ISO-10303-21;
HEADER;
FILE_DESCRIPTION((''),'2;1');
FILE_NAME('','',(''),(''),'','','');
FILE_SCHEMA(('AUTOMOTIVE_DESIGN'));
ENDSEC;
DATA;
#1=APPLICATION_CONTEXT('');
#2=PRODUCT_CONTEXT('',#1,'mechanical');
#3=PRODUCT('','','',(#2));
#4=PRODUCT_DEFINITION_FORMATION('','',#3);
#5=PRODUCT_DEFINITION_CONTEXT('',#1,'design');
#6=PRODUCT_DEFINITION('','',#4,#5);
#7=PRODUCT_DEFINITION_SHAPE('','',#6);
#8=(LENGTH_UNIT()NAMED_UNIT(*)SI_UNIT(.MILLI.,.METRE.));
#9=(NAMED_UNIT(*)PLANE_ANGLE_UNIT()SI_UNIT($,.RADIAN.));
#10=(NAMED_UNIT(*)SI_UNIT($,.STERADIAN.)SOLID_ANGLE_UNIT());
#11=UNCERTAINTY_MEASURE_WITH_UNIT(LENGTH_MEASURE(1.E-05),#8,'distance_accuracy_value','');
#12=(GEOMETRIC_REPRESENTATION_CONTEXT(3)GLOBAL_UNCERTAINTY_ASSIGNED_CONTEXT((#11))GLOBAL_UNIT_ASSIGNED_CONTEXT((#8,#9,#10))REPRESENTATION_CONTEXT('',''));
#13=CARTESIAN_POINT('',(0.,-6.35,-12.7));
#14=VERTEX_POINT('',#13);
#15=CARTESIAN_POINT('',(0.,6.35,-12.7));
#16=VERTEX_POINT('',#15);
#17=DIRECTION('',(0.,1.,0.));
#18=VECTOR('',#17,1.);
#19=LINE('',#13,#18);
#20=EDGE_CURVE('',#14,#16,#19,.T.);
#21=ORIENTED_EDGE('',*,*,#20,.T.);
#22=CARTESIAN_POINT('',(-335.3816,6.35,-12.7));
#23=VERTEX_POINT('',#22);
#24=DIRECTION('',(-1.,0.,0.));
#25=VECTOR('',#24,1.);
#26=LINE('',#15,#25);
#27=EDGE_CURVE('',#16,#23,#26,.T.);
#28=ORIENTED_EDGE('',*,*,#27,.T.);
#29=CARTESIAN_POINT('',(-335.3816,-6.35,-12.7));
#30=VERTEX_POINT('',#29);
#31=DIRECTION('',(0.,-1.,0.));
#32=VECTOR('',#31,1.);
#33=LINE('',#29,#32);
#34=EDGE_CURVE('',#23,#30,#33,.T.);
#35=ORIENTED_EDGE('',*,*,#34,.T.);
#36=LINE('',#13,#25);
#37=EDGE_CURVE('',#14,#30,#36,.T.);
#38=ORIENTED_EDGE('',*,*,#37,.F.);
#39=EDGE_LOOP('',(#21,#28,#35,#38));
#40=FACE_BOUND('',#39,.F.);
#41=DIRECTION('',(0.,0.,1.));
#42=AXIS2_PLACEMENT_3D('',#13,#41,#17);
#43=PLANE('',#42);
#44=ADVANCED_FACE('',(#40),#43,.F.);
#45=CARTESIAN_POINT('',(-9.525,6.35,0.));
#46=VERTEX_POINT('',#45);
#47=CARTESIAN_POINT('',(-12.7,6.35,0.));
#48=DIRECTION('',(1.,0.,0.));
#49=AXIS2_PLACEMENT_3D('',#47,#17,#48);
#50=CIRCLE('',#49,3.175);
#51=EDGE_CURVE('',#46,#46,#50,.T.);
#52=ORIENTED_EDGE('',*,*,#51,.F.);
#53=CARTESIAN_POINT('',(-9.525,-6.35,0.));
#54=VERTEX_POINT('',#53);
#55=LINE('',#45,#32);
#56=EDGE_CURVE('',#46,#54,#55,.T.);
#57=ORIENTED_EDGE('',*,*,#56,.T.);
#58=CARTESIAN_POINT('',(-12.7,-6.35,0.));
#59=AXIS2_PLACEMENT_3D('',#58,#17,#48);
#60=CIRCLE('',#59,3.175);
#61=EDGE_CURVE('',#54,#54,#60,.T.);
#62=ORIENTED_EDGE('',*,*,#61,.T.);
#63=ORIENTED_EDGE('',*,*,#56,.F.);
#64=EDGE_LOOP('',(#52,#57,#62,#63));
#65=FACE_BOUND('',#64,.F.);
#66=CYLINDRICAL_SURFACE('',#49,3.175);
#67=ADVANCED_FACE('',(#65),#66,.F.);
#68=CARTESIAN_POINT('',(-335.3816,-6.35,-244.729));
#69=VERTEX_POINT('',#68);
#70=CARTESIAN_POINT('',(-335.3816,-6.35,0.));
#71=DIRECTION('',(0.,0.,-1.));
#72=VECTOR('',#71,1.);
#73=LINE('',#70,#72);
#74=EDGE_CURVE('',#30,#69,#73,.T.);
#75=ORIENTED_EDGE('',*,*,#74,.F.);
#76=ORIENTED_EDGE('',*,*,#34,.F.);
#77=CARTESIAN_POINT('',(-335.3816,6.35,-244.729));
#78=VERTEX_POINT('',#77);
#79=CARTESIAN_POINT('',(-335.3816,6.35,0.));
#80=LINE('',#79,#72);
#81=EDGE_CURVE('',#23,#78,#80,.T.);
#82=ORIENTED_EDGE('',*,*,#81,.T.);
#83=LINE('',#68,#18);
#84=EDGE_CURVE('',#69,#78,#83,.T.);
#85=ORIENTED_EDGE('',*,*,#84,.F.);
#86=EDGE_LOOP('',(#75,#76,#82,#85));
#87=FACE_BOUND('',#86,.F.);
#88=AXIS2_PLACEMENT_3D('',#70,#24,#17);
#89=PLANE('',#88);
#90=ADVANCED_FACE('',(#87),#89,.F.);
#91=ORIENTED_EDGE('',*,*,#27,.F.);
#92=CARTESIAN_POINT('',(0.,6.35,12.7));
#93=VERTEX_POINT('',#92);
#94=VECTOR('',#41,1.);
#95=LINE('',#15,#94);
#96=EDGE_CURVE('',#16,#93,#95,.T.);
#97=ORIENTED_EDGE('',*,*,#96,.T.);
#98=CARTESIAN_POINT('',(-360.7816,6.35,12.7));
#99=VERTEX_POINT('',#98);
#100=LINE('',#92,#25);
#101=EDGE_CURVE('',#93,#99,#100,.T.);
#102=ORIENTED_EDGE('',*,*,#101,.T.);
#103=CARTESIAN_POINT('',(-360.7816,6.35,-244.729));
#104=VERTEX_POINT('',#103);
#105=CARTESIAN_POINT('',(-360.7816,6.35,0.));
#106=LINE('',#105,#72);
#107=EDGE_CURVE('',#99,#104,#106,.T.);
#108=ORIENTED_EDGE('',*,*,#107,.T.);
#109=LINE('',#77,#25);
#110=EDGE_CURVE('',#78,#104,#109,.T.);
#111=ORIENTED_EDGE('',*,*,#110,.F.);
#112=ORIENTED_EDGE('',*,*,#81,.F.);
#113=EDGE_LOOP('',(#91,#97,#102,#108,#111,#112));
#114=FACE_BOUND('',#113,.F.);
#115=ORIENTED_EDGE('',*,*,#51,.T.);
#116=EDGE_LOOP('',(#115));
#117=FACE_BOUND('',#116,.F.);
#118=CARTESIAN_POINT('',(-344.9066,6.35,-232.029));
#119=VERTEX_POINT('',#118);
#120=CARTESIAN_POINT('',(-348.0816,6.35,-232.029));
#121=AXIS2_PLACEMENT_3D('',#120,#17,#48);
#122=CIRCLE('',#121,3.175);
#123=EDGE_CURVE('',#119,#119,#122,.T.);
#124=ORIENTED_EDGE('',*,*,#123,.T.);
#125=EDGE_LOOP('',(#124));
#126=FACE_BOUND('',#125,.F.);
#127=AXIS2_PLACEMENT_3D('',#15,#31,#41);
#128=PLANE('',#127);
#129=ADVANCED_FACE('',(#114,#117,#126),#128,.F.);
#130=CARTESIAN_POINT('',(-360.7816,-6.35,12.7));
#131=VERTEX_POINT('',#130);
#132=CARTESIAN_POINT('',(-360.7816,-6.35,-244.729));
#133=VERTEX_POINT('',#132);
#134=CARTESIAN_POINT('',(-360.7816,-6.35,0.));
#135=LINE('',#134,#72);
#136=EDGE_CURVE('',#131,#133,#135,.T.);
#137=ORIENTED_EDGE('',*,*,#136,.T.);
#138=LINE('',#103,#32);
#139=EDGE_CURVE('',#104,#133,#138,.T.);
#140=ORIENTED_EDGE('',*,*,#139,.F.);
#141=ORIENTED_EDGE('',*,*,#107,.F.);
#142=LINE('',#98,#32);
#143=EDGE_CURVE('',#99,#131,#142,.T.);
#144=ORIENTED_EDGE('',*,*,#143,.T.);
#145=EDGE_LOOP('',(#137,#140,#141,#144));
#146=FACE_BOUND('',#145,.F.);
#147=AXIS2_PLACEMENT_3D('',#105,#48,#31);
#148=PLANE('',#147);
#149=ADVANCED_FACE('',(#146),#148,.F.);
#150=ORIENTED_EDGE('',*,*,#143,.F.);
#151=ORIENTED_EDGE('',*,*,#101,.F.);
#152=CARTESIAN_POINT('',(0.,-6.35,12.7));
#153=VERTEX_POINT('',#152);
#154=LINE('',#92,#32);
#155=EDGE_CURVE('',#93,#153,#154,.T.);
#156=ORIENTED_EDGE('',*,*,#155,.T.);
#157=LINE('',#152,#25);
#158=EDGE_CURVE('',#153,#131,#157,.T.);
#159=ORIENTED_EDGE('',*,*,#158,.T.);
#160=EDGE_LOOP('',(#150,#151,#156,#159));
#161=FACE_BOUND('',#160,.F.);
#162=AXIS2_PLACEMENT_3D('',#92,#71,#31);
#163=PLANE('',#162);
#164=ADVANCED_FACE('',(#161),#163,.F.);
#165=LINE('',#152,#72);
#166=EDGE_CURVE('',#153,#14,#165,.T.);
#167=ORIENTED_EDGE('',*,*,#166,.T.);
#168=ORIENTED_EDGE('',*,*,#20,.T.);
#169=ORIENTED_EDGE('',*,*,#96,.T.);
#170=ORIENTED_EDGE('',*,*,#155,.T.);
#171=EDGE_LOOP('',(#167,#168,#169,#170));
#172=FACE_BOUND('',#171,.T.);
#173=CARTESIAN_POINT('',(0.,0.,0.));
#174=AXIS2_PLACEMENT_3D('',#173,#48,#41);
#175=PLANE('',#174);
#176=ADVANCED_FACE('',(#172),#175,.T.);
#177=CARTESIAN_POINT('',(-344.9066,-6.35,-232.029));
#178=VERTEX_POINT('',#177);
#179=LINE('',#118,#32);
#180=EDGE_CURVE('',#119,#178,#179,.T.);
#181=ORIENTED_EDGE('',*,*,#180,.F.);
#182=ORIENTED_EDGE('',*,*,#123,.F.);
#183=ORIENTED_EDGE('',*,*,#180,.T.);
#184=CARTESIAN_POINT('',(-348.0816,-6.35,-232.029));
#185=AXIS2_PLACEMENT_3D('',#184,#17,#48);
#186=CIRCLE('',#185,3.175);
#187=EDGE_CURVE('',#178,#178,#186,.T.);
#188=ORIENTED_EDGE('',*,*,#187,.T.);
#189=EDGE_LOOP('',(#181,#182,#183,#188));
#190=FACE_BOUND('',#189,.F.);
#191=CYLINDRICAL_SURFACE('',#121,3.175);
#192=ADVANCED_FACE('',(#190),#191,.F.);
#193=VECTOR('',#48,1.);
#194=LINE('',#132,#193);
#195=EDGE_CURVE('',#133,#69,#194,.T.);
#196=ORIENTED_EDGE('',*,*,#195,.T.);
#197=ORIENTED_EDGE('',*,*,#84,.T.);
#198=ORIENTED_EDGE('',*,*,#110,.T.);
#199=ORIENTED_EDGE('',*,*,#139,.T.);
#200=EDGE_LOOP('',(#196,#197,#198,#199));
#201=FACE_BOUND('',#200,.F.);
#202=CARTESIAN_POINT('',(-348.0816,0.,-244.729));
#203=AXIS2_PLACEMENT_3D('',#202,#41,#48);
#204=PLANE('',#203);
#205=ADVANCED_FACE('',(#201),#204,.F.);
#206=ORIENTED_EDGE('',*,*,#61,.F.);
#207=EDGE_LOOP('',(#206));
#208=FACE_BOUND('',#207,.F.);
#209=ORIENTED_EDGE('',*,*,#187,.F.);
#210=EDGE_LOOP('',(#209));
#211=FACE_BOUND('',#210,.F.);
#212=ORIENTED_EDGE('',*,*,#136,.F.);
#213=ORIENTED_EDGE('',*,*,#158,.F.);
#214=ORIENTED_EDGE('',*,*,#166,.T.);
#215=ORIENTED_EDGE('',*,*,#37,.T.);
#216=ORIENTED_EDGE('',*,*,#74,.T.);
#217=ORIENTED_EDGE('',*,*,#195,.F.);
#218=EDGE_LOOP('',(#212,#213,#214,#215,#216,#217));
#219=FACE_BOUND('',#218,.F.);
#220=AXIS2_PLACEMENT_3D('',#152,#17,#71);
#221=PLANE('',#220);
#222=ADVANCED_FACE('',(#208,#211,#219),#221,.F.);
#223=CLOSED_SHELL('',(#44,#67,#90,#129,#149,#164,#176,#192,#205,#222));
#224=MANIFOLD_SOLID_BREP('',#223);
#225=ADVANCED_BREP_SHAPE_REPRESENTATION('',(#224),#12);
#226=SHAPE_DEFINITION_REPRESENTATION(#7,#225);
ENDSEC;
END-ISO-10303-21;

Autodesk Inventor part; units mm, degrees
ref_plane "YZ Plane" through (0, 0, 0) normal (1, 0, 0) x (0, 1, 0)
ref_plane "XZ Plane" through (0, 0, 0) normal (0, 1, 0) x (-1, 0, 0)
ref_plane "XY Plane" through (0, 0, 0) normal (0, 0, 1) x (1, 0, 0)
sketch "Sketch7" plane through (0, 0, 0) normal (1, 0, 0) x (0, 1, 0)
  line L0 (6.35, 12.7) -> (-6.35, 12.7)
  line L1 (-6.35, 12.7) -> (-6.35, -12.7)
  line L2 (-6.35, -12.7) -> (6.35, -12.7)
  line L3 (6.35, -12.7) -> (6.35, 12.7)
  line L4 (6.35, 12.7) -> (-6.35, -12.7) construction
  line L5 (-6.35, 12.7) -> (6.35, -12.7) construction
  point P0 (0, 0)
  dimension "d30" = 12.7
  dimension "d31" = 25.4
sketch "Sketch9" plane through (0, 0, 0) normal (0, 1, 0) x (-1, 0, 0)
  line L0 (0, 0) -> (348.0816, 0)
  line L1 (348.0816, 0) -> (348.0816, -244.729)
  dimension "d34" = 244.729
  dimension "d35" = 348.0816
sweep "Sweep2" add profiles "Sketch7" path "Sketch9"
sketch "Sketch10" plane through (0, 6.35, 12.7) normal (0, 1, 0) x (1, 0, 0)
  line L0 (0, 0) -> (0, 25.4) projected
  line L1 (0, 25.4) -> (-335.3816, 25.4) projected
  line L2 (0, 0) -> (-25.4, 0)
  line L3 (-25.4, 0) -> (-25.4, 25.4)
  line L4 (-25.4, 25.4) -> (0, 25.4)
  line L5 (0, 25.4) -> (0, 0)
  circle A0 centre (-12.7, 12.7) radius 3.175
  line L6 (-335.3816, 257.429) -> (-360.7816, 257.429) projected
  line L7 (-360.7816, 0) -> (-360.7816, 257.429) projected
  line L8 (-335.3816, 257.429) -> (-360.7816, 257.429)
  line L9 (-360.7816, 257.429) -> (-360.7816, 232.029)
  line L10 (-360.7816, 232.029) -> (-335.3816, 232.029)
  line L11 (-335.3816, 232.029) -> (-335.3816, 257.429)
  circle A1 centre (-348.0816, 244.729) radius 3.175
  point P0 (0, 12.7)
  point P1 (-25.4, 12.7)
  point P2 (-12.7, 25.4)
  dimension "d38" = 25.4
  dimension "d39" = 6.35
  dimension "d40" = 12.7
  dimension "d41" = 12.7
  dimension "d42" = 25.4
  dimension "d43" = 6.35
  dimension "d44" = 12.7
  dimension "d45" = 12.7
extrude "Extrusion4" cut sketch "Sketch10" against normal blind 25.4 contours A0 | A1
properties part number "ArmRest(H)"
